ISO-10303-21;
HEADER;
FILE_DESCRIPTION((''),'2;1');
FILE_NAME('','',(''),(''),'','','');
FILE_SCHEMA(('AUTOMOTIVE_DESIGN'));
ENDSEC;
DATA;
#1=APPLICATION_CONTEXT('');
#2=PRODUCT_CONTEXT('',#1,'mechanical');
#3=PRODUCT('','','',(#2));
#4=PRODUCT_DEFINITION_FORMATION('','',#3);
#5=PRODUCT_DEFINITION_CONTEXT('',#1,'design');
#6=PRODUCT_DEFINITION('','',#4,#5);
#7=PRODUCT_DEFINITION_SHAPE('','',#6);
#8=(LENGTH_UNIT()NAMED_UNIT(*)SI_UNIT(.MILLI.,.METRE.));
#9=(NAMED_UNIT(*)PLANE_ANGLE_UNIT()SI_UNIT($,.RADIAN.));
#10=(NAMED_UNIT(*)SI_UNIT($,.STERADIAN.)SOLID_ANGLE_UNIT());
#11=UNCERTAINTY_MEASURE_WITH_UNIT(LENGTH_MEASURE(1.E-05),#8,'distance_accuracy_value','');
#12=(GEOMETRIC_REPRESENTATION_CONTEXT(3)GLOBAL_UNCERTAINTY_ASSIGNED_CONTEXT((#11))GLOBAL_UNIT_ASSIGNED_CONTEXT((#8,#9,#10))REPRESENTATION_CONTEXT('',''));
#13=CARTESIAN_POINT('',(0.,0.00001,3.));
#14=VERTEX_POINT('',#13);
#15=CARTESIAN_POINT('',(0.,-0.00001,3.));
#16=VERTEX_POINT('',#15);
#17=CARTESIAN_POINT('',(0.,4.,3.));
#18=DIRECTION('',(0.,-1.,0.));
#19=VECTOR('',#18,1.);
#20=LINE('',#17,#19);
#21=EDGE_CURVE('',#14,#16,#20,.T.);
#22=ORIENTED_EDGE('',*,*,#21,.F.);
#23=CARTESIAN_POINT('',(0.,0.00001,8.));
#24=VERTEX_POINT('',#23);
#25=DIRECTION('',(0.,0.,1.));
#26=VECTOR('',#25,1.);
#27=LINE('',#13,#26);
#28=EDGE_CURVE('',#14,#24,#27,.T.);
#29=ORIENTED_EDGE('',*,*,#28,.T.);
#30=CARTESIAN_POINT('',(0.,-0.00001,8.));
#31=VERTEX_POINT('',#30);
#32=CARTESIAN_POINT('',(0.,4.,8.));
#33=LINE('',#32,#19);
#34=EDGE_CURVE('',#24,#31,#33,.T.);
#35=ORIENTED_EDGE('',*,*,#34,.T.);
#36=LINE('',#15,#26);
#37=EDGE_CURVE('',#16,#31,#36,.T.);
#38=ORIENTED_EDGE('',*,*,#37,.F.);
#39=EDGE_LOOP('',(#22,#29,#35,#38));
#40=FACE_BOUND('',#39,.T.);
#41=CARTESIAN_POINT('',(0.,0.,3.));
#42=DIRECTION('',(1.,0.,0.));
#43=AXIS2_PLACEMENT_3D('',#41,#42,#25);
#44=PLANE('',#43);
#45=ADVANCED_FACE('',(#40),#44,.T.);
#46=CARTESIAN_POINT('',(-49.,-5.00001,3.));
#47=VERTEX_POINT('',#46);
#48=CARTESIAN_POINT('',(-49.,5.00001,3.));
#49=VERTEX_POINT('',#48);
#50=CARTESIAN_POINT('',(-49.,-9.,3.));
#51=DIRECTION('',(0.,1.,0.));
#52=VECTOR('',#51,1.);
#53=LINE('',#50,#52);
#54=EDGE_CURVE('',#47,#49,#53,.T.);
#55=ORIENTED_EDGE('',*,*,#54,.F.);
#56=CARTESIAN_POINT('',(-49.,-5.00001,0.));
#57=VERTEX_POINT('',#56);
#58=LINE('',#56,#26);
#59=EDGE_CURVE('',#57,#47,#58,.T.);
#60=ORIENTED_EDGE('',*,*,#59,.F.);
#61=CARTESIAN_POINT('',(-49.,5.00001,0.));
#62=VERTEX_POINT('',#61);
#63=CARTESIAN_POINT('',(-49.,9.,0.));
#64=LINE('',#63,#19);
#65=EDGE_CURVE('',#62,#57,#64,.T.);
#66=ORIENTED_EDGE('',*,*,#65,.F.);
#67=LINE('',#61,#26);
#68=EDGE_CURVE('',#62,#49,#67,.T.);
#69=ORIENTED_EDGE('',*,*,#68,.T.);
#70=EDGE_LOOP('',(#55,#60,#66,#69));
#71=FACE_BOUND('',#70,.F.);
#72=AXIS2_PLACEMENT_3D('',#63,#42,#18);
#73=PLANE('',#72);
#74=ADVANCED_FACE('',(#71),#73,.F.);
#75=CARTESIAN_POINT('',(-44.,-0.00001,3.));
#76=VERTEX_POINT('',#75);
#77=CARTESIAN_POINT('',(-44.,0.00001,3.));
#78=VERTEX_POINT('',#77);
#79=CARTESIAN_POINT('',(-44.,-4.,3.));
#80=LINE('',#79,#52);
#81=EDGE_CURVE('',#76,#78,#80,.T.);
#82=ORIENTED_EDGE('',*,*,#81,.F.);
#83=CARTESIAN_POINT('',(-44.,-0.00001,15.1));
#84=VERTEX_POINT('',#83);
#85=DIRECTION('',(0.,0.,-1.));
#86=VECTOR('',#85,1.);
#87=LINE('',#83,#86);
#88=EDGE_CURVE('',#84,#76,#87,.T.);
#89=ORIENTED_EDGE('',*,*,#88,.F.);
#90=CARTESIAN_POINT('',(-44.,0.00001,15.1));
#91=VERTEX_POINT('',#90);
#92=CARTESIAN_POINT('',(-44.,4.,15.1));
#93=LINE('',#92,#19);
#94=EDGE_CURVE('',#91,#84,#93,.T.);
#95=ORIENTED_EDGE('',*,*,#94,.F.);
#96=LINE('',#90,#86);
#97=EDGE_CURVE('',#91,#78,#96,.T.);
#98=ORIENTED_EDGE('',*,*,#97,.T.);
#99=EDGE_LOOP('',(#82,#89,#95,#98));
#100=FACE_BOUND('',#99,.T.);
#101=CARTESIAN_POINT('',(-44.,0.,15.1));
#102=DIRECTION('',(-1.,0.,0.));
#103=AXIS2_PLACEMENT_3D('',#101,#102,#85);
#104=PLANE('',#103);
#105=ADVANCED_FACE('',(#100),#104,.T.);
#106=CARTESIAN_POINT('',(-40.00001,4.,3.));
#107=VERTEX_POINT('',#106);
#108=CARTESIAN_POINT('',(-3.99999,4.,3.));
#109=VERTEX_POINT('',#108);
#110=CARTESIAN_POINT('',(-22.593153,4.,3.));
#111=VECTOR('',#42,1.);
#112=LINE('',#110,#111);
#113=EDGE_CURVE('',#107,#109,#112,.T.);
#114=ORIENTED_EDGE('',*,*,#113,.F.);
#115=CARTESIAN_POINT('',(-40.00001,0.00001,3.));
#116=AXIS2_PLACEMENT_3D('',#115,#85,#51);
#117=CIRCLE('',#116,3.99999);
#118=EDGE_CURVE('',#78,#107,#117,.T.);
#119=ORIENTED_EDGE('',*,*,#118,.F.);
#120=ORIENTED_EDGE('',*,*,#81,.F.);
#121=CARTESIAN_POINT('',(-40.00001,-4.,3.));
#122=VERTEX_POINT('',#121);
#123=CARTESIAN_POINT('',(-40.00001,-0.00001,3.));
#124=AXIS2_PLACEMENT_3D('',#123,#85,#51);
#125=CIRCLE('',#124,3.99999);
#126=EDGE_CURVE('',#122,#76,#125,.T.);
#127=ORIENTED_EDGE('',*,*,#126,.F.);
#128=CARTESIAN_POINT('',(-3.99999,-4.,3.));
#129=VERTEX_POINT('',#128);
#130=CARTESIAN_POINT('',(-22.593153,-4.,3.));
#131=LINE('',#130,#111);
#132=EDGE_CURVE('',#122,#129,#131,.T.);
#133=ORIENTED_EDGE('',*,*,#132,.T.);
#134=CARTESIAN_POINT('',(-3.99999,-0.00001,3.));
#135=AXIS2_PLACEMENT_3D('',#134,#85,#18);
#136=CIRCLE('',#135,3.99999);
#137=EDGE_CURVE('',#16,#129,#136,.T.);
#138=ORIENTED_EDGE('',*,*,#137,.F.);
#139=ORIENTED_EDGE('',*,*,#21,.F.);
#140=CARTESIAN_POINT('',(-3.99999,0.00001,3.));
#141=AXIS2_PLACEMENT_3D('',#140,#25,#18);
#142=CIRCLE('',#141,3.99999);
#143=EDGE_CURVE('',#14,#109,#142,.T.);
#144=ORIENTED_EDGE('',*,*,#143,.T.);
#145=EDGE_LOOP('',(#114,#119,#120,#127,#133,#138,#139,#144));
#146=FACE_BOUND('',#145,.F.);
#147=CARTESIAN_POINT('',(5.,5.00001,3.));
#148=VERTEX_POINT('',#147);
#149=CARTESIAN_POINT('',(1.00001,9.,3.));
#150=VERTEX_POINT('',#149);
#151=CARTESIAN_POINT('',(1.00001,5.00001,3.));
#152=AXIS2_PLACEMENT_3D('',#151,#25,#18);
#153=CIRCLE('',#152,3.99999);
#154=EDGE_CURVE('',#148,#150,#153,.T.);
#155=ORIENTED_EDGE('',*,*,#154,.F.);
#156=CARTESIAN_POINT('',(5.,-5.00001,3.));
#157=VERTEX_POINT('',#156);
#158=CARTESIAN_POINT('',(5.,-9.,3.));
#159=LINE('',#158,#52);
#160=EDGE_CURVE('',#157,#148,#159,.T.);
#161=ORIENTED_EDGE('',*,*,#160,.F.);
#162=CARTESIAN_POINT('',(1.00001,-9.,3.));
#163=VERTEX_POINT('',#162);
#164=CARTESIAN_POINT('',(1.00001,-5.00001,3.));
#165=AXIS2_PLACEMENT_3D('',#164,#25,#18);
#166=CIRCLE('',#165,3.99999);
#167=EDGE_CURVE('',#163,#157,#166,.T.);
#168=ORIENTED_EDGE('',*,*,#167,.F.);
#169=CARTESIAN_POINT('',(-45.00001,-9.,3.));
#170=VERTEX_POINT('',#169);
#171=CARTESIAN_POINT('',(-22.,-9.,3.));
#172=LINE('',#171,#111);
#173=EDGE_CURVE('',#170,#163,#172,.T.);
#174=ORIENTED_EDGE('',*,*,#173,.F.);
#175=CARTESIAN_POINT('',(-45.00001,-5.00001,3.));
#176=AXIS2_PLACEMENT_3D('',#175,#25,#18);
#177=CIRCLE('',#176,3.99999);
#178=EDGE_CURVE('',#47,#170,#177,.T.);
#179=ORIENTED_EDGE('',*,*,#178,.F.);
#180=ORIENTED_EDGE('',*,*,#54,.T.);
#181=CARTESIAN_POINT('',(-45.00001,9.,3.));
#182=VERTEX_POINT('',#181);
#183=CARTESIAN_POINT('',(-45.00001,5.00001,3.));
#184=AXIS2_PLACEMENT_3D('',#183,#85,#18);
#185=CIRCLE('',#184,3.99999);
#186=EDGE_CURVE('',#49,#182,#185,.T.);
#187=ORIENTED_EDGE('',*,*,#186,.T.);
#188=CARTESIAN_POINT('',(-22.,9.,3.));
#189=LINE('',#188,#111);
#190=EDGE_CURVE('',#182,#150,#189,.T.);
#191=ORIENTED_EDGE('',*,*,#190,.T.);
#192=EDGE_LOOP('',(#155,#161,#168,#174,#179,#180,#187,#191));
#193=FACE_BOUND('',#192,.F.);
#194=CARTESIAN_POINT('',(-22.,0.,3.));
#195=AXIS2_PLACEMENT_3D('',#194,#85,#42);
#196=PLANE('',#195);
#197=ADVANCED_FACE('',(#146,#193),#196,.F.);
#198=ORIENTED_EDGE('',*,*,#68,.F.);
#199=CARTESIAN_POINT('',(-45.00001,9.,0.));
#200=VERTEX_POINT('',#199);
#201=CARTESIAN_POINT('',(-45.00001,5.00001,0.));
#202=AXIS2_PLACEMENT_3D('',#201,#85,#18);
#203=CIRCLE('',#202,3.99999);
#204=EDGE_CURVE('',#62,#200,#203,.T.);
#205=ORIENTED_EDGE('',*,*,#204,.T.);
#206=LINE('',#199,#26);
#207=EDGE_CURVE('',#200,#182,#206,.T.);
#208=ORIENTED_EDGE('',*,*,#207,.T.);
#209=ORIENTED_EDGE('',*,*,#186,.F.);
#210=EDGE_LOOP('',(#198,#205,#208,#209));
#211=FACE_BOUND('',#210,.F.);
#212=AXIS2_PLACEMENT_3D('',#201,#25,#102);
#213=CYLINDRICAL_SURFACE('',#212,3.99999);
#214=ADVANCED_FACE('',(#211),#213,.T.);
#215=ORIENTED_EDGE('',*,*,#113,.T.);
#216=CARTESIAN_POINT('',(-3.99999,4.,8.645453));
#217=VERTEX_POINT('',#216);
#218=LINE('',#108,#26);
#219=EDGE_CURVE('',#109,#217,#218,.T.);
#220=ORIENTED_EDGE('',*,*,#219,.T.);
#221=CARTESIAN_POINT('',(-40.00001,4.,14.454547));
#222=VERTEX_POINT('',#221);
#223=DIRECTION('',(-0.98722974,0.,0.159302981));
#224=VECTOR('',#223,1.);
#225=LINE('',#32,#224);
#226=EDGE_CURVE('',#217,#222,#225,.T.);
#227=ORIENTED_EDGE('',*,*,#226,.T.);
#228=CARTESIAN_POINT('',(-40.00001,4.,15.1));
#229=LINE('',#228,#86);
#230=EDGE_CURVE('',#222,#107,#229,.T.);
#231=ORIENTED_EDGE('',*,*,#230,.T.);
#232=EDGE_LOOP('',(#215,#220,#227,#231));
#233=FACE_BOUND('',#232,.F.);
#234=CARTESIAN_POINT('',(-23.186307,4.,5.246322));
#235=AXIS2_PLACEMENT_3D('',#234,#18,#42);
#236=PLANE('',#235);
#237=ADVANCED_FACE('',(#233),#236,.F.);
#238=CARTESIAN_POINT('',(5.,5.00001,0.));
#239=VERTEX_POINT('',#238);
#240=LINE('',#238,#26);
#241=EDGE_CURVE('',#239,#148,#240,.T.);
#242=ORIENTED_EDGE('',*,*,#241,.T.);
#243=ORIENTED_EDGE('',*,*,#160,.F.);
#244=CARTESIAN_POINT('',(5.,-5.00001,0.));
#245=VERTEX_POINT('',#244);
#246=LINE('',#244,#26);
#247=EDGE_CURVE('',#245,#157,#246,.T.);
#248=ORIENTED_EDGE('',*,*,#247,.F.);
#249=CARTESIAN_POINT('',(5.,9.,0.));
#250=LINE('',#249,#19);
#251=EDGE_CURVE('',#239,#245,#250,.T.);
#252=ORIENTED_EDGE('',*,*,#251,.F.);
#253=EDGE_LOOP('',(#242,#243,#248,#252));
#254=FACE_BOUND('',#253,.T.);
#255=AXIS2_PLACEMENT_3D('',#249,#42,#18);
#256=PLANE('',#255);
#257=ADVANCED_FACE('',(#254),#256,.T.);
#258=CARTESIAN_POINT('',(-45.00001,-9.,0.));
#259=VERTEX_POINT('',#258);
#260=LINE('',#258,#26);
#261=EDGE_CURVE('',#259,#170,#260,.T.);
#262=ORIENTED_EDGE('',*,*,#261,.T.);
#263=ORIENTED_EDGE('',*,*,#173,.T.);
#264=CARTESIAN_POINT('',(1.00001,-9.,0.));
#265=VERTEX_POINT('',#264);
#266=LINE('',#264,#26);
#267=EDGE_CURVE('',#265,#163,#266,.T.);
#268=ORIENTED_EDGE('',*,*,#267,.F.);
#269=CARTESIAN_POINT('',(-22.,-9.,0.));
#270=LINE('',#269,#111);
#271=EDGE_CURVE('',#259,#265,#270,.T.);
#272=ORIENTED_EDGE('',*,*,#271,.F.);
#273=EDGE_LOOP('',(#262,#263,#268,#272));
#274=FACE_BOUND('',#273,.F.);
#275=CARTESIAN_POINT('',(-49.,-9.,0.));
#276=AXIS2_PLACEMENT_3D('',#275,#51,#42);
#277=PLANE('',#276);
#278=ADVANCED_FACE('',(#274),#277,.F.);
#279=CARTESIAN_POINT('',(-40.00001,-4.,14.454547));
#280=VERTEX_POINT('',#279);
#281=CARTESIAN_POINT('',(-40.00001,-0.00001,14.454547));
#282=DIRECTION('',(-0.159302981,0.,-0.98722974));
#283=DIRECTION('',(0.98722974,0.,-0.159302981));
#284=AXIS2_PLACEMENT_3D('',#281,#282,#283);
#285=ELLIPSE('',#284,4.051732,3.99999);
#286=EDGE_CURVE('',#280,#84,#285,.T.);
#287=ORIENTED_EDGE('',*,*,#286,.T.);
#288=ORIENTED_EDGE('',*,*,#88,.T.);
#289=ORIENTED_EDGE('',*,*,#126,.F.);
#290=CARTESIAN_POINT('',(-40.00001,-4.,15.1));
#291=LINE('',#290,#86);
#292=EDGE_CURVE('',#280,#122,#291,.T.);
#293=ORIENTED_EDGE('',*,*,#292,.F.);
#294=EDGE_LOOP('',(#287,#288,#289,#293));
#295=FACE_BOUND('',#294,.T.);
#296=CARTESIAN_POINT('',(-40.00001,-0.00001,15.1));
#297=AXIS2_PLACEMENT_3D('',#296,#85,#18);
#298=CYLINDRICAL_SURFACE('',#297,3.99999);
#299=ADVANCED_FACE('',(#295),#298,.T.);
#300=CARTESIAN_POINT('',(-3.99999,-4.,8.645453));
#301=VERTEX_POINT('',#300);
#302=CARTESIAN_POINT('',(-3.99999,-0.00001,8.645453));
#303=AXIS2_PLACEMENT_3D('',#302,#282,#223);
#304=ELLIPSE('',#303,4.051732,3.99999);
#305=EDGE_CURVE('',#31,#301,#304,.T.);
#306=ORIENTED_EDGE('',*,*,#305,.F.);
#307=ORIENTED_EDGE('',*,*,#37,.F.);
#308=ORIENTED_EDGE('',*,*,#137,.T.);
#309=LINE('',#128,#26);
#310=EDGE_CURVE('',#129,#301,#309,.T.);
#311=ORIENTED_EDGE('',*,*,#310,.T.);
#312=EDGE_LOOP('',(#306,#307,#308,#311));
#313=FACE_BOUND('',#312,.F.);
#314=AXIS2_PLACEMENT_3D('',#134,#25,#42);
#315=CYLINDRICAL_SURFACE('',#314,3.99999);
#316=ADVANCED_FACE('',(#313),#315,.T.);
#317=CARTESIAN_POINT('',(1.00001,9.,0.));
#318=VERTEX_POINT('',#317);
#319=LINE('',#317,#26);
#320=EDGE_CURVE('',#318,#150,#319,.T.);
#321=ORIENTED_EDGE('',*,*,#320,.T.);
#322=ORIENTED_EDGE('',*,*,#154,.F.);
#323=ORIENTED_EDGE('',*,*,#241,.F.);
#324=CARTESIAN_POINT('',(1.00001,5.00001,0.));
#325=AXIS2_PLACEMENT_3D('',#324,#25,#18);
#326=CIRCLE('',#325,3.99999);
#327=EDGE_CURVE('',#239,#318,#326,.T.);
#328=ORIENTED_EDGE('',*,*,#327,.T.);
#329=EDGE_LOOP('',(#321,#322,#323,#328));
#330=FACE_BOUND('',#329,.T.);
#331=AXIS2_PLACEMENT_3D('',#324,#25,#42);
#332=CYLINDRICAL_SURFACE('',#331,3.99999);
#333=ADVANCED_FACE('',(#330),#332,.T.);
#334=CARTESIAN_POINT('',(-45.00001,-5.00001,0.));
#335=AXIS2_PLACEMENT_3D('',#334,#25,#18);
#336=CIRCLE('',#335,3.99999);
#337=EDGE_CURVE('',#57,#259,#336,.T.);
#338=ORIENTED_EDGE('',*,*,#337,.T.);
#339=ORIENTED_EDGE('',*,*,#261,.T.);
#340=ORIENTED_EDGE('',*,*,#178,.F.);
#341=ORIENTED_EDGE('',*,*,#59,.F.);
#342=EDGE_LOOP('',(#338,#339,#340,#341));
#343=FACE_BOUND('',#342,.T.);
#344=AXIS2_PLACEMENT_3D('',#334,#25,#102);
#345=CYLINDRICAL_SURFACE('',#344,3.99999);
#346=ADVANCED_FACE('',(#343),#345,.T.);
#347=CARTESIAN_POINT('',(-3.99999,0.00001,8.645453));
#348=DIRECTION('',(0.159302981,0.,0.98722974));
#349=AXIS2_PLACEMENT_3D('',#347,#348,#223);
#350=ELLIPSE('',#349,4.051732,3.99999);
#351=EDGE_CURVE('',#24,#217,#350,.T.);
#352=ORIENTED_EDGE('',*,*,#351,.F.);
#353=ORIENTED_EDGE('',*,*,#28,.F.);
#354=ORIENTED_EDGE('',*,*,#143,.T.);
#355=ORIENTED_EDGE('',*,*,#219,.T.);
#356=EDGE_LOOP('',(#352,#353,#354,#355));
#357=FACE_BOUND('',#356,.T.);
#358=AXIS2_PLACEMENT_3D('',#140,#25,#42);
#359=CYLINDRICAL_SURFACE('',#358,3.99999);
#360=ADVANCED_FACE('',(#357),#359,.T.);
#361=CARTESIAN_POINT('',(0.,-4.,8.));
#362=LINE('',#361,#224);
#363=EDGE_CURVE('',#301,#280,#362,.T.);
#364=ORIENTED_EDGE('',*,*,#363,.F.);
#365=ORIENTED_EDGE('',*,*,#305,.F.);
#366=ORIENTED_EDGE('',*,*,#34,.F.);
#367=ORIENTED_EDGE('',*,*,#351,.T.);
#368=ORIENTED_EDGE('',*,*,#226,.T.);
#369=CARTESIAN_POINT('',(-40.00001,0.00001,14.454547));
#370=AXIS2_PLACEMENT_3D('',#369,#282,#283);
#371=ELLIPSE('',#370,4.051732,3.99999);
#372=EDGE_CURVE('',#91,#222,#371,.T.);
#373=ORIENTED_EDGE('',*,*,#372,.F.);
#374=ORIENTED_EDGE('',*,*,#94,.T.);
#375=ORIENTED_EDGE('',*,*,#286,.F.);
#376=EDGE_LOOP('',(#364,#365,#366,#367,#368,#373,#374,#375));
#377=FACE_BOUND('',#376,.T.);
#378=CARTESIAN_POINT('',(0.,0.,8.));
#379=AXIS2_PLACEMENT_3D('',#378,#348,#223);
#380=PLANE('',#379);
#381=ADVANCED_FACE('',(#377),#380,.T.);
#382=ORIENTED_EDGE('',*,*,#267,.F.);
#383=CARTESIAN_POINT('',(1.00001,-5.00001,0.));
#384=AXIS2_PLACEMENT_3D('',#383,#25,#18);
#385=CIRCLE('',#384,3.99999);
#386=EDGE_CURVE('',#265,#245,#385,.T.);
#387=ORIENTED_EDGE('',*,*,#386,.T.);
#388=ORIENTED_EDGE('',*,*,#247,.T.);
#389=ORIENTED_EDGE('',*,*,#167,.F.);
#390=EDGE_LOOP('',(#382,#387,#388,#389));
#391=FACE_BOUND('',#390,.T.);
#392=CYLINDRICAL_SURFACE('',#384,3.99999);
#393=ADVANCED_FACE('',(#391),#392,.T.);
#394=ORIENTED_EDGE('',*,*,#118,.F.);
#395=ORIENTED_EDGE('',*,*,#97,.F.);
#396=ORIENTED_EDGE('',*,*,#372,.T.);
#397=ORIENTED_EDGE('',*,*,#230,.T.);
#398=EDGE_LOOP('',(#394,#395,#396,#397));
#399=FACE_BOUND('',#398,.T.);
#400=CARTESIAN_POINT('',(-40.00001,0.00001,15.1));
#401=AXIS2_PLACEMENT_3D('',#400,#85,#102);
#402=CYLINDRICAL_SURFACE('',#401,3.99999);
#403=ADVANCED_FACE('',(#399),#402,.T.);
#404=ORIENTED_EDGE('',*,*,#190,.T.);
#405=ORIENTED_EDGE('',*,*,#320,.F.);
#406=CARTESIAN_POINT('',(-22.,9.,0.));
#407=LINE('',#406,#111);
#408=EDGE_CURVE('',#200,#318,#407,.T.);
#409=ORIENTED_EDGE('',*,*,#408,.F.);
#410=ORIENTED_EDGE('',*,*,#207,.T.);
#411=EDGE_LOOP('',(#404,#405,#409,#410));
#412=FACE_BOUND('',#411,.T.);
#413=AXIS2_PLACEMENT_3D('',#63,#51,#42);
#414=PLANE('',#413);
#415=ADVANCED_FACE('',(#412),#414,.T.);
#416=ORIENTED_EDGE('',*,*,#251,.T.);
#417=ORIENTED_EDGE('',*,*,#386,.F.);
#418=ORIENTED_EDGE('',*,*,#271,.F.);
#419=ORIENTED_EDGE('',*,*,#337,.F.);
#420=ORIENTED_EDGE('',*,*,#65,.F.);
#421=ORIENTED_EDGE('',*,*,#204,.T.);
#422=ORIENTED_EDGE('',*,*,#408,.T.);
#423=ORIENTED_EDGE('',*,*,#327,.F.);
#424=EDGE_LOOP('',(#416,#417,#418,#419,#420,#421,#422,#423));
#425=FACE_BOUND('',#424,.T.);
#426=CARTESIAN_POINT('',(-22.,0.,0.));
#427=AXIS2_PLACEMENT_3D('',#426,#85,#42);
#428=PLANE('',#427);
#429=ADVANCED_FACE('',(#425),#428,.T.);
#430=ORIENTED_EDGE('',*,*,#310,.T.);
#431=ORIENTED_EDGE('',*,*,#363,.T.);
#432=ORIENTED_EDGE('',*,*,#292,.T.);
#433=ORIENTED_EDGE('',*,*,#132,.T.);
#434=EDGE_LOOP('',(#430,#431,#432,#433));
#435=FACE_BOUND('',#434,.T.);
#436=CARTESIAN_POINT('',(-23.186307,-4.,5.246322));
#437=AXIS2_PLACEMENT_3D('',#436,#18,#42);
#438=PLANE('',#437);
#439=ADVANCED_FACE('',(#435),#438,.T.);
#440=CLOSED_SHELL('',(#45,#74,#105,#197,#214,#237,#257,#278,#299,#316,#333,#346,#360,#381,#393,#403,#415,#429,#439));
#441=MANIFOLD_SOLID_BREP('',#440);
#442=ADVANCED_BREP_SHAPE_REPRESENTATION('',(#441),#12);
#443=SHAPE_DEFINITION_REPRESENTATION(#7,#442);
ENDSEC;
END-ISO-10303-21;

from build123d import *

# Parameters (mm, degrees)
F1_DEPTH = 4
F2_W     = 54
F2_H     = 18
F3_DEPTH = 3
F4_R     = 3.99999


# Not quite as in the source:
# - a fillet or chamfer is up to 0.001 mm smaller than in the source, because OpenCascade refuses the exact size


with BuildPart() as f1:
    # F0 (on Front) → F1 (new body, symmetric)
    with BuildSketch(Plane.XZ):
        Polygon((-49, 0), (5, 0), (5, 3), (0, 3), (0, 8), (-44, 15.1), (-44, 3), (-49, 3), align=None)
    extrude(amount=F1_DEPTH, both=True)

    # F2 (on face) → F3 (join, through all)
    with BuildSketch(Plane(origin=(0, 0, 0), x_dir=(1, 0, 0), z_dir=(0, 0, -1))):
        with Locations((-22, 0)):
            Rectangle(F2_W, F2_H)
    extrude(amount=-F3_DEPTH)

    # F4 (radius 4 in the source; OpenCascade refuses exactly that, so slightly less here)
    f4_edges = [f1.edges().sort_by_distance(p)[0] for p in [
        (0, -4, 5.5),
        (0, 4, 5.5),
        (-44, 4, 9.05),
        (-44, -4, 9.05),
        (-49, -9, 1.5),
        (-49, 9, 1.5),
        (5, 9, 1.5),
        (5, -9, 1.5),
    ]]
    fillet(f4_edges, radius=F4_R)


solid = f1.part
